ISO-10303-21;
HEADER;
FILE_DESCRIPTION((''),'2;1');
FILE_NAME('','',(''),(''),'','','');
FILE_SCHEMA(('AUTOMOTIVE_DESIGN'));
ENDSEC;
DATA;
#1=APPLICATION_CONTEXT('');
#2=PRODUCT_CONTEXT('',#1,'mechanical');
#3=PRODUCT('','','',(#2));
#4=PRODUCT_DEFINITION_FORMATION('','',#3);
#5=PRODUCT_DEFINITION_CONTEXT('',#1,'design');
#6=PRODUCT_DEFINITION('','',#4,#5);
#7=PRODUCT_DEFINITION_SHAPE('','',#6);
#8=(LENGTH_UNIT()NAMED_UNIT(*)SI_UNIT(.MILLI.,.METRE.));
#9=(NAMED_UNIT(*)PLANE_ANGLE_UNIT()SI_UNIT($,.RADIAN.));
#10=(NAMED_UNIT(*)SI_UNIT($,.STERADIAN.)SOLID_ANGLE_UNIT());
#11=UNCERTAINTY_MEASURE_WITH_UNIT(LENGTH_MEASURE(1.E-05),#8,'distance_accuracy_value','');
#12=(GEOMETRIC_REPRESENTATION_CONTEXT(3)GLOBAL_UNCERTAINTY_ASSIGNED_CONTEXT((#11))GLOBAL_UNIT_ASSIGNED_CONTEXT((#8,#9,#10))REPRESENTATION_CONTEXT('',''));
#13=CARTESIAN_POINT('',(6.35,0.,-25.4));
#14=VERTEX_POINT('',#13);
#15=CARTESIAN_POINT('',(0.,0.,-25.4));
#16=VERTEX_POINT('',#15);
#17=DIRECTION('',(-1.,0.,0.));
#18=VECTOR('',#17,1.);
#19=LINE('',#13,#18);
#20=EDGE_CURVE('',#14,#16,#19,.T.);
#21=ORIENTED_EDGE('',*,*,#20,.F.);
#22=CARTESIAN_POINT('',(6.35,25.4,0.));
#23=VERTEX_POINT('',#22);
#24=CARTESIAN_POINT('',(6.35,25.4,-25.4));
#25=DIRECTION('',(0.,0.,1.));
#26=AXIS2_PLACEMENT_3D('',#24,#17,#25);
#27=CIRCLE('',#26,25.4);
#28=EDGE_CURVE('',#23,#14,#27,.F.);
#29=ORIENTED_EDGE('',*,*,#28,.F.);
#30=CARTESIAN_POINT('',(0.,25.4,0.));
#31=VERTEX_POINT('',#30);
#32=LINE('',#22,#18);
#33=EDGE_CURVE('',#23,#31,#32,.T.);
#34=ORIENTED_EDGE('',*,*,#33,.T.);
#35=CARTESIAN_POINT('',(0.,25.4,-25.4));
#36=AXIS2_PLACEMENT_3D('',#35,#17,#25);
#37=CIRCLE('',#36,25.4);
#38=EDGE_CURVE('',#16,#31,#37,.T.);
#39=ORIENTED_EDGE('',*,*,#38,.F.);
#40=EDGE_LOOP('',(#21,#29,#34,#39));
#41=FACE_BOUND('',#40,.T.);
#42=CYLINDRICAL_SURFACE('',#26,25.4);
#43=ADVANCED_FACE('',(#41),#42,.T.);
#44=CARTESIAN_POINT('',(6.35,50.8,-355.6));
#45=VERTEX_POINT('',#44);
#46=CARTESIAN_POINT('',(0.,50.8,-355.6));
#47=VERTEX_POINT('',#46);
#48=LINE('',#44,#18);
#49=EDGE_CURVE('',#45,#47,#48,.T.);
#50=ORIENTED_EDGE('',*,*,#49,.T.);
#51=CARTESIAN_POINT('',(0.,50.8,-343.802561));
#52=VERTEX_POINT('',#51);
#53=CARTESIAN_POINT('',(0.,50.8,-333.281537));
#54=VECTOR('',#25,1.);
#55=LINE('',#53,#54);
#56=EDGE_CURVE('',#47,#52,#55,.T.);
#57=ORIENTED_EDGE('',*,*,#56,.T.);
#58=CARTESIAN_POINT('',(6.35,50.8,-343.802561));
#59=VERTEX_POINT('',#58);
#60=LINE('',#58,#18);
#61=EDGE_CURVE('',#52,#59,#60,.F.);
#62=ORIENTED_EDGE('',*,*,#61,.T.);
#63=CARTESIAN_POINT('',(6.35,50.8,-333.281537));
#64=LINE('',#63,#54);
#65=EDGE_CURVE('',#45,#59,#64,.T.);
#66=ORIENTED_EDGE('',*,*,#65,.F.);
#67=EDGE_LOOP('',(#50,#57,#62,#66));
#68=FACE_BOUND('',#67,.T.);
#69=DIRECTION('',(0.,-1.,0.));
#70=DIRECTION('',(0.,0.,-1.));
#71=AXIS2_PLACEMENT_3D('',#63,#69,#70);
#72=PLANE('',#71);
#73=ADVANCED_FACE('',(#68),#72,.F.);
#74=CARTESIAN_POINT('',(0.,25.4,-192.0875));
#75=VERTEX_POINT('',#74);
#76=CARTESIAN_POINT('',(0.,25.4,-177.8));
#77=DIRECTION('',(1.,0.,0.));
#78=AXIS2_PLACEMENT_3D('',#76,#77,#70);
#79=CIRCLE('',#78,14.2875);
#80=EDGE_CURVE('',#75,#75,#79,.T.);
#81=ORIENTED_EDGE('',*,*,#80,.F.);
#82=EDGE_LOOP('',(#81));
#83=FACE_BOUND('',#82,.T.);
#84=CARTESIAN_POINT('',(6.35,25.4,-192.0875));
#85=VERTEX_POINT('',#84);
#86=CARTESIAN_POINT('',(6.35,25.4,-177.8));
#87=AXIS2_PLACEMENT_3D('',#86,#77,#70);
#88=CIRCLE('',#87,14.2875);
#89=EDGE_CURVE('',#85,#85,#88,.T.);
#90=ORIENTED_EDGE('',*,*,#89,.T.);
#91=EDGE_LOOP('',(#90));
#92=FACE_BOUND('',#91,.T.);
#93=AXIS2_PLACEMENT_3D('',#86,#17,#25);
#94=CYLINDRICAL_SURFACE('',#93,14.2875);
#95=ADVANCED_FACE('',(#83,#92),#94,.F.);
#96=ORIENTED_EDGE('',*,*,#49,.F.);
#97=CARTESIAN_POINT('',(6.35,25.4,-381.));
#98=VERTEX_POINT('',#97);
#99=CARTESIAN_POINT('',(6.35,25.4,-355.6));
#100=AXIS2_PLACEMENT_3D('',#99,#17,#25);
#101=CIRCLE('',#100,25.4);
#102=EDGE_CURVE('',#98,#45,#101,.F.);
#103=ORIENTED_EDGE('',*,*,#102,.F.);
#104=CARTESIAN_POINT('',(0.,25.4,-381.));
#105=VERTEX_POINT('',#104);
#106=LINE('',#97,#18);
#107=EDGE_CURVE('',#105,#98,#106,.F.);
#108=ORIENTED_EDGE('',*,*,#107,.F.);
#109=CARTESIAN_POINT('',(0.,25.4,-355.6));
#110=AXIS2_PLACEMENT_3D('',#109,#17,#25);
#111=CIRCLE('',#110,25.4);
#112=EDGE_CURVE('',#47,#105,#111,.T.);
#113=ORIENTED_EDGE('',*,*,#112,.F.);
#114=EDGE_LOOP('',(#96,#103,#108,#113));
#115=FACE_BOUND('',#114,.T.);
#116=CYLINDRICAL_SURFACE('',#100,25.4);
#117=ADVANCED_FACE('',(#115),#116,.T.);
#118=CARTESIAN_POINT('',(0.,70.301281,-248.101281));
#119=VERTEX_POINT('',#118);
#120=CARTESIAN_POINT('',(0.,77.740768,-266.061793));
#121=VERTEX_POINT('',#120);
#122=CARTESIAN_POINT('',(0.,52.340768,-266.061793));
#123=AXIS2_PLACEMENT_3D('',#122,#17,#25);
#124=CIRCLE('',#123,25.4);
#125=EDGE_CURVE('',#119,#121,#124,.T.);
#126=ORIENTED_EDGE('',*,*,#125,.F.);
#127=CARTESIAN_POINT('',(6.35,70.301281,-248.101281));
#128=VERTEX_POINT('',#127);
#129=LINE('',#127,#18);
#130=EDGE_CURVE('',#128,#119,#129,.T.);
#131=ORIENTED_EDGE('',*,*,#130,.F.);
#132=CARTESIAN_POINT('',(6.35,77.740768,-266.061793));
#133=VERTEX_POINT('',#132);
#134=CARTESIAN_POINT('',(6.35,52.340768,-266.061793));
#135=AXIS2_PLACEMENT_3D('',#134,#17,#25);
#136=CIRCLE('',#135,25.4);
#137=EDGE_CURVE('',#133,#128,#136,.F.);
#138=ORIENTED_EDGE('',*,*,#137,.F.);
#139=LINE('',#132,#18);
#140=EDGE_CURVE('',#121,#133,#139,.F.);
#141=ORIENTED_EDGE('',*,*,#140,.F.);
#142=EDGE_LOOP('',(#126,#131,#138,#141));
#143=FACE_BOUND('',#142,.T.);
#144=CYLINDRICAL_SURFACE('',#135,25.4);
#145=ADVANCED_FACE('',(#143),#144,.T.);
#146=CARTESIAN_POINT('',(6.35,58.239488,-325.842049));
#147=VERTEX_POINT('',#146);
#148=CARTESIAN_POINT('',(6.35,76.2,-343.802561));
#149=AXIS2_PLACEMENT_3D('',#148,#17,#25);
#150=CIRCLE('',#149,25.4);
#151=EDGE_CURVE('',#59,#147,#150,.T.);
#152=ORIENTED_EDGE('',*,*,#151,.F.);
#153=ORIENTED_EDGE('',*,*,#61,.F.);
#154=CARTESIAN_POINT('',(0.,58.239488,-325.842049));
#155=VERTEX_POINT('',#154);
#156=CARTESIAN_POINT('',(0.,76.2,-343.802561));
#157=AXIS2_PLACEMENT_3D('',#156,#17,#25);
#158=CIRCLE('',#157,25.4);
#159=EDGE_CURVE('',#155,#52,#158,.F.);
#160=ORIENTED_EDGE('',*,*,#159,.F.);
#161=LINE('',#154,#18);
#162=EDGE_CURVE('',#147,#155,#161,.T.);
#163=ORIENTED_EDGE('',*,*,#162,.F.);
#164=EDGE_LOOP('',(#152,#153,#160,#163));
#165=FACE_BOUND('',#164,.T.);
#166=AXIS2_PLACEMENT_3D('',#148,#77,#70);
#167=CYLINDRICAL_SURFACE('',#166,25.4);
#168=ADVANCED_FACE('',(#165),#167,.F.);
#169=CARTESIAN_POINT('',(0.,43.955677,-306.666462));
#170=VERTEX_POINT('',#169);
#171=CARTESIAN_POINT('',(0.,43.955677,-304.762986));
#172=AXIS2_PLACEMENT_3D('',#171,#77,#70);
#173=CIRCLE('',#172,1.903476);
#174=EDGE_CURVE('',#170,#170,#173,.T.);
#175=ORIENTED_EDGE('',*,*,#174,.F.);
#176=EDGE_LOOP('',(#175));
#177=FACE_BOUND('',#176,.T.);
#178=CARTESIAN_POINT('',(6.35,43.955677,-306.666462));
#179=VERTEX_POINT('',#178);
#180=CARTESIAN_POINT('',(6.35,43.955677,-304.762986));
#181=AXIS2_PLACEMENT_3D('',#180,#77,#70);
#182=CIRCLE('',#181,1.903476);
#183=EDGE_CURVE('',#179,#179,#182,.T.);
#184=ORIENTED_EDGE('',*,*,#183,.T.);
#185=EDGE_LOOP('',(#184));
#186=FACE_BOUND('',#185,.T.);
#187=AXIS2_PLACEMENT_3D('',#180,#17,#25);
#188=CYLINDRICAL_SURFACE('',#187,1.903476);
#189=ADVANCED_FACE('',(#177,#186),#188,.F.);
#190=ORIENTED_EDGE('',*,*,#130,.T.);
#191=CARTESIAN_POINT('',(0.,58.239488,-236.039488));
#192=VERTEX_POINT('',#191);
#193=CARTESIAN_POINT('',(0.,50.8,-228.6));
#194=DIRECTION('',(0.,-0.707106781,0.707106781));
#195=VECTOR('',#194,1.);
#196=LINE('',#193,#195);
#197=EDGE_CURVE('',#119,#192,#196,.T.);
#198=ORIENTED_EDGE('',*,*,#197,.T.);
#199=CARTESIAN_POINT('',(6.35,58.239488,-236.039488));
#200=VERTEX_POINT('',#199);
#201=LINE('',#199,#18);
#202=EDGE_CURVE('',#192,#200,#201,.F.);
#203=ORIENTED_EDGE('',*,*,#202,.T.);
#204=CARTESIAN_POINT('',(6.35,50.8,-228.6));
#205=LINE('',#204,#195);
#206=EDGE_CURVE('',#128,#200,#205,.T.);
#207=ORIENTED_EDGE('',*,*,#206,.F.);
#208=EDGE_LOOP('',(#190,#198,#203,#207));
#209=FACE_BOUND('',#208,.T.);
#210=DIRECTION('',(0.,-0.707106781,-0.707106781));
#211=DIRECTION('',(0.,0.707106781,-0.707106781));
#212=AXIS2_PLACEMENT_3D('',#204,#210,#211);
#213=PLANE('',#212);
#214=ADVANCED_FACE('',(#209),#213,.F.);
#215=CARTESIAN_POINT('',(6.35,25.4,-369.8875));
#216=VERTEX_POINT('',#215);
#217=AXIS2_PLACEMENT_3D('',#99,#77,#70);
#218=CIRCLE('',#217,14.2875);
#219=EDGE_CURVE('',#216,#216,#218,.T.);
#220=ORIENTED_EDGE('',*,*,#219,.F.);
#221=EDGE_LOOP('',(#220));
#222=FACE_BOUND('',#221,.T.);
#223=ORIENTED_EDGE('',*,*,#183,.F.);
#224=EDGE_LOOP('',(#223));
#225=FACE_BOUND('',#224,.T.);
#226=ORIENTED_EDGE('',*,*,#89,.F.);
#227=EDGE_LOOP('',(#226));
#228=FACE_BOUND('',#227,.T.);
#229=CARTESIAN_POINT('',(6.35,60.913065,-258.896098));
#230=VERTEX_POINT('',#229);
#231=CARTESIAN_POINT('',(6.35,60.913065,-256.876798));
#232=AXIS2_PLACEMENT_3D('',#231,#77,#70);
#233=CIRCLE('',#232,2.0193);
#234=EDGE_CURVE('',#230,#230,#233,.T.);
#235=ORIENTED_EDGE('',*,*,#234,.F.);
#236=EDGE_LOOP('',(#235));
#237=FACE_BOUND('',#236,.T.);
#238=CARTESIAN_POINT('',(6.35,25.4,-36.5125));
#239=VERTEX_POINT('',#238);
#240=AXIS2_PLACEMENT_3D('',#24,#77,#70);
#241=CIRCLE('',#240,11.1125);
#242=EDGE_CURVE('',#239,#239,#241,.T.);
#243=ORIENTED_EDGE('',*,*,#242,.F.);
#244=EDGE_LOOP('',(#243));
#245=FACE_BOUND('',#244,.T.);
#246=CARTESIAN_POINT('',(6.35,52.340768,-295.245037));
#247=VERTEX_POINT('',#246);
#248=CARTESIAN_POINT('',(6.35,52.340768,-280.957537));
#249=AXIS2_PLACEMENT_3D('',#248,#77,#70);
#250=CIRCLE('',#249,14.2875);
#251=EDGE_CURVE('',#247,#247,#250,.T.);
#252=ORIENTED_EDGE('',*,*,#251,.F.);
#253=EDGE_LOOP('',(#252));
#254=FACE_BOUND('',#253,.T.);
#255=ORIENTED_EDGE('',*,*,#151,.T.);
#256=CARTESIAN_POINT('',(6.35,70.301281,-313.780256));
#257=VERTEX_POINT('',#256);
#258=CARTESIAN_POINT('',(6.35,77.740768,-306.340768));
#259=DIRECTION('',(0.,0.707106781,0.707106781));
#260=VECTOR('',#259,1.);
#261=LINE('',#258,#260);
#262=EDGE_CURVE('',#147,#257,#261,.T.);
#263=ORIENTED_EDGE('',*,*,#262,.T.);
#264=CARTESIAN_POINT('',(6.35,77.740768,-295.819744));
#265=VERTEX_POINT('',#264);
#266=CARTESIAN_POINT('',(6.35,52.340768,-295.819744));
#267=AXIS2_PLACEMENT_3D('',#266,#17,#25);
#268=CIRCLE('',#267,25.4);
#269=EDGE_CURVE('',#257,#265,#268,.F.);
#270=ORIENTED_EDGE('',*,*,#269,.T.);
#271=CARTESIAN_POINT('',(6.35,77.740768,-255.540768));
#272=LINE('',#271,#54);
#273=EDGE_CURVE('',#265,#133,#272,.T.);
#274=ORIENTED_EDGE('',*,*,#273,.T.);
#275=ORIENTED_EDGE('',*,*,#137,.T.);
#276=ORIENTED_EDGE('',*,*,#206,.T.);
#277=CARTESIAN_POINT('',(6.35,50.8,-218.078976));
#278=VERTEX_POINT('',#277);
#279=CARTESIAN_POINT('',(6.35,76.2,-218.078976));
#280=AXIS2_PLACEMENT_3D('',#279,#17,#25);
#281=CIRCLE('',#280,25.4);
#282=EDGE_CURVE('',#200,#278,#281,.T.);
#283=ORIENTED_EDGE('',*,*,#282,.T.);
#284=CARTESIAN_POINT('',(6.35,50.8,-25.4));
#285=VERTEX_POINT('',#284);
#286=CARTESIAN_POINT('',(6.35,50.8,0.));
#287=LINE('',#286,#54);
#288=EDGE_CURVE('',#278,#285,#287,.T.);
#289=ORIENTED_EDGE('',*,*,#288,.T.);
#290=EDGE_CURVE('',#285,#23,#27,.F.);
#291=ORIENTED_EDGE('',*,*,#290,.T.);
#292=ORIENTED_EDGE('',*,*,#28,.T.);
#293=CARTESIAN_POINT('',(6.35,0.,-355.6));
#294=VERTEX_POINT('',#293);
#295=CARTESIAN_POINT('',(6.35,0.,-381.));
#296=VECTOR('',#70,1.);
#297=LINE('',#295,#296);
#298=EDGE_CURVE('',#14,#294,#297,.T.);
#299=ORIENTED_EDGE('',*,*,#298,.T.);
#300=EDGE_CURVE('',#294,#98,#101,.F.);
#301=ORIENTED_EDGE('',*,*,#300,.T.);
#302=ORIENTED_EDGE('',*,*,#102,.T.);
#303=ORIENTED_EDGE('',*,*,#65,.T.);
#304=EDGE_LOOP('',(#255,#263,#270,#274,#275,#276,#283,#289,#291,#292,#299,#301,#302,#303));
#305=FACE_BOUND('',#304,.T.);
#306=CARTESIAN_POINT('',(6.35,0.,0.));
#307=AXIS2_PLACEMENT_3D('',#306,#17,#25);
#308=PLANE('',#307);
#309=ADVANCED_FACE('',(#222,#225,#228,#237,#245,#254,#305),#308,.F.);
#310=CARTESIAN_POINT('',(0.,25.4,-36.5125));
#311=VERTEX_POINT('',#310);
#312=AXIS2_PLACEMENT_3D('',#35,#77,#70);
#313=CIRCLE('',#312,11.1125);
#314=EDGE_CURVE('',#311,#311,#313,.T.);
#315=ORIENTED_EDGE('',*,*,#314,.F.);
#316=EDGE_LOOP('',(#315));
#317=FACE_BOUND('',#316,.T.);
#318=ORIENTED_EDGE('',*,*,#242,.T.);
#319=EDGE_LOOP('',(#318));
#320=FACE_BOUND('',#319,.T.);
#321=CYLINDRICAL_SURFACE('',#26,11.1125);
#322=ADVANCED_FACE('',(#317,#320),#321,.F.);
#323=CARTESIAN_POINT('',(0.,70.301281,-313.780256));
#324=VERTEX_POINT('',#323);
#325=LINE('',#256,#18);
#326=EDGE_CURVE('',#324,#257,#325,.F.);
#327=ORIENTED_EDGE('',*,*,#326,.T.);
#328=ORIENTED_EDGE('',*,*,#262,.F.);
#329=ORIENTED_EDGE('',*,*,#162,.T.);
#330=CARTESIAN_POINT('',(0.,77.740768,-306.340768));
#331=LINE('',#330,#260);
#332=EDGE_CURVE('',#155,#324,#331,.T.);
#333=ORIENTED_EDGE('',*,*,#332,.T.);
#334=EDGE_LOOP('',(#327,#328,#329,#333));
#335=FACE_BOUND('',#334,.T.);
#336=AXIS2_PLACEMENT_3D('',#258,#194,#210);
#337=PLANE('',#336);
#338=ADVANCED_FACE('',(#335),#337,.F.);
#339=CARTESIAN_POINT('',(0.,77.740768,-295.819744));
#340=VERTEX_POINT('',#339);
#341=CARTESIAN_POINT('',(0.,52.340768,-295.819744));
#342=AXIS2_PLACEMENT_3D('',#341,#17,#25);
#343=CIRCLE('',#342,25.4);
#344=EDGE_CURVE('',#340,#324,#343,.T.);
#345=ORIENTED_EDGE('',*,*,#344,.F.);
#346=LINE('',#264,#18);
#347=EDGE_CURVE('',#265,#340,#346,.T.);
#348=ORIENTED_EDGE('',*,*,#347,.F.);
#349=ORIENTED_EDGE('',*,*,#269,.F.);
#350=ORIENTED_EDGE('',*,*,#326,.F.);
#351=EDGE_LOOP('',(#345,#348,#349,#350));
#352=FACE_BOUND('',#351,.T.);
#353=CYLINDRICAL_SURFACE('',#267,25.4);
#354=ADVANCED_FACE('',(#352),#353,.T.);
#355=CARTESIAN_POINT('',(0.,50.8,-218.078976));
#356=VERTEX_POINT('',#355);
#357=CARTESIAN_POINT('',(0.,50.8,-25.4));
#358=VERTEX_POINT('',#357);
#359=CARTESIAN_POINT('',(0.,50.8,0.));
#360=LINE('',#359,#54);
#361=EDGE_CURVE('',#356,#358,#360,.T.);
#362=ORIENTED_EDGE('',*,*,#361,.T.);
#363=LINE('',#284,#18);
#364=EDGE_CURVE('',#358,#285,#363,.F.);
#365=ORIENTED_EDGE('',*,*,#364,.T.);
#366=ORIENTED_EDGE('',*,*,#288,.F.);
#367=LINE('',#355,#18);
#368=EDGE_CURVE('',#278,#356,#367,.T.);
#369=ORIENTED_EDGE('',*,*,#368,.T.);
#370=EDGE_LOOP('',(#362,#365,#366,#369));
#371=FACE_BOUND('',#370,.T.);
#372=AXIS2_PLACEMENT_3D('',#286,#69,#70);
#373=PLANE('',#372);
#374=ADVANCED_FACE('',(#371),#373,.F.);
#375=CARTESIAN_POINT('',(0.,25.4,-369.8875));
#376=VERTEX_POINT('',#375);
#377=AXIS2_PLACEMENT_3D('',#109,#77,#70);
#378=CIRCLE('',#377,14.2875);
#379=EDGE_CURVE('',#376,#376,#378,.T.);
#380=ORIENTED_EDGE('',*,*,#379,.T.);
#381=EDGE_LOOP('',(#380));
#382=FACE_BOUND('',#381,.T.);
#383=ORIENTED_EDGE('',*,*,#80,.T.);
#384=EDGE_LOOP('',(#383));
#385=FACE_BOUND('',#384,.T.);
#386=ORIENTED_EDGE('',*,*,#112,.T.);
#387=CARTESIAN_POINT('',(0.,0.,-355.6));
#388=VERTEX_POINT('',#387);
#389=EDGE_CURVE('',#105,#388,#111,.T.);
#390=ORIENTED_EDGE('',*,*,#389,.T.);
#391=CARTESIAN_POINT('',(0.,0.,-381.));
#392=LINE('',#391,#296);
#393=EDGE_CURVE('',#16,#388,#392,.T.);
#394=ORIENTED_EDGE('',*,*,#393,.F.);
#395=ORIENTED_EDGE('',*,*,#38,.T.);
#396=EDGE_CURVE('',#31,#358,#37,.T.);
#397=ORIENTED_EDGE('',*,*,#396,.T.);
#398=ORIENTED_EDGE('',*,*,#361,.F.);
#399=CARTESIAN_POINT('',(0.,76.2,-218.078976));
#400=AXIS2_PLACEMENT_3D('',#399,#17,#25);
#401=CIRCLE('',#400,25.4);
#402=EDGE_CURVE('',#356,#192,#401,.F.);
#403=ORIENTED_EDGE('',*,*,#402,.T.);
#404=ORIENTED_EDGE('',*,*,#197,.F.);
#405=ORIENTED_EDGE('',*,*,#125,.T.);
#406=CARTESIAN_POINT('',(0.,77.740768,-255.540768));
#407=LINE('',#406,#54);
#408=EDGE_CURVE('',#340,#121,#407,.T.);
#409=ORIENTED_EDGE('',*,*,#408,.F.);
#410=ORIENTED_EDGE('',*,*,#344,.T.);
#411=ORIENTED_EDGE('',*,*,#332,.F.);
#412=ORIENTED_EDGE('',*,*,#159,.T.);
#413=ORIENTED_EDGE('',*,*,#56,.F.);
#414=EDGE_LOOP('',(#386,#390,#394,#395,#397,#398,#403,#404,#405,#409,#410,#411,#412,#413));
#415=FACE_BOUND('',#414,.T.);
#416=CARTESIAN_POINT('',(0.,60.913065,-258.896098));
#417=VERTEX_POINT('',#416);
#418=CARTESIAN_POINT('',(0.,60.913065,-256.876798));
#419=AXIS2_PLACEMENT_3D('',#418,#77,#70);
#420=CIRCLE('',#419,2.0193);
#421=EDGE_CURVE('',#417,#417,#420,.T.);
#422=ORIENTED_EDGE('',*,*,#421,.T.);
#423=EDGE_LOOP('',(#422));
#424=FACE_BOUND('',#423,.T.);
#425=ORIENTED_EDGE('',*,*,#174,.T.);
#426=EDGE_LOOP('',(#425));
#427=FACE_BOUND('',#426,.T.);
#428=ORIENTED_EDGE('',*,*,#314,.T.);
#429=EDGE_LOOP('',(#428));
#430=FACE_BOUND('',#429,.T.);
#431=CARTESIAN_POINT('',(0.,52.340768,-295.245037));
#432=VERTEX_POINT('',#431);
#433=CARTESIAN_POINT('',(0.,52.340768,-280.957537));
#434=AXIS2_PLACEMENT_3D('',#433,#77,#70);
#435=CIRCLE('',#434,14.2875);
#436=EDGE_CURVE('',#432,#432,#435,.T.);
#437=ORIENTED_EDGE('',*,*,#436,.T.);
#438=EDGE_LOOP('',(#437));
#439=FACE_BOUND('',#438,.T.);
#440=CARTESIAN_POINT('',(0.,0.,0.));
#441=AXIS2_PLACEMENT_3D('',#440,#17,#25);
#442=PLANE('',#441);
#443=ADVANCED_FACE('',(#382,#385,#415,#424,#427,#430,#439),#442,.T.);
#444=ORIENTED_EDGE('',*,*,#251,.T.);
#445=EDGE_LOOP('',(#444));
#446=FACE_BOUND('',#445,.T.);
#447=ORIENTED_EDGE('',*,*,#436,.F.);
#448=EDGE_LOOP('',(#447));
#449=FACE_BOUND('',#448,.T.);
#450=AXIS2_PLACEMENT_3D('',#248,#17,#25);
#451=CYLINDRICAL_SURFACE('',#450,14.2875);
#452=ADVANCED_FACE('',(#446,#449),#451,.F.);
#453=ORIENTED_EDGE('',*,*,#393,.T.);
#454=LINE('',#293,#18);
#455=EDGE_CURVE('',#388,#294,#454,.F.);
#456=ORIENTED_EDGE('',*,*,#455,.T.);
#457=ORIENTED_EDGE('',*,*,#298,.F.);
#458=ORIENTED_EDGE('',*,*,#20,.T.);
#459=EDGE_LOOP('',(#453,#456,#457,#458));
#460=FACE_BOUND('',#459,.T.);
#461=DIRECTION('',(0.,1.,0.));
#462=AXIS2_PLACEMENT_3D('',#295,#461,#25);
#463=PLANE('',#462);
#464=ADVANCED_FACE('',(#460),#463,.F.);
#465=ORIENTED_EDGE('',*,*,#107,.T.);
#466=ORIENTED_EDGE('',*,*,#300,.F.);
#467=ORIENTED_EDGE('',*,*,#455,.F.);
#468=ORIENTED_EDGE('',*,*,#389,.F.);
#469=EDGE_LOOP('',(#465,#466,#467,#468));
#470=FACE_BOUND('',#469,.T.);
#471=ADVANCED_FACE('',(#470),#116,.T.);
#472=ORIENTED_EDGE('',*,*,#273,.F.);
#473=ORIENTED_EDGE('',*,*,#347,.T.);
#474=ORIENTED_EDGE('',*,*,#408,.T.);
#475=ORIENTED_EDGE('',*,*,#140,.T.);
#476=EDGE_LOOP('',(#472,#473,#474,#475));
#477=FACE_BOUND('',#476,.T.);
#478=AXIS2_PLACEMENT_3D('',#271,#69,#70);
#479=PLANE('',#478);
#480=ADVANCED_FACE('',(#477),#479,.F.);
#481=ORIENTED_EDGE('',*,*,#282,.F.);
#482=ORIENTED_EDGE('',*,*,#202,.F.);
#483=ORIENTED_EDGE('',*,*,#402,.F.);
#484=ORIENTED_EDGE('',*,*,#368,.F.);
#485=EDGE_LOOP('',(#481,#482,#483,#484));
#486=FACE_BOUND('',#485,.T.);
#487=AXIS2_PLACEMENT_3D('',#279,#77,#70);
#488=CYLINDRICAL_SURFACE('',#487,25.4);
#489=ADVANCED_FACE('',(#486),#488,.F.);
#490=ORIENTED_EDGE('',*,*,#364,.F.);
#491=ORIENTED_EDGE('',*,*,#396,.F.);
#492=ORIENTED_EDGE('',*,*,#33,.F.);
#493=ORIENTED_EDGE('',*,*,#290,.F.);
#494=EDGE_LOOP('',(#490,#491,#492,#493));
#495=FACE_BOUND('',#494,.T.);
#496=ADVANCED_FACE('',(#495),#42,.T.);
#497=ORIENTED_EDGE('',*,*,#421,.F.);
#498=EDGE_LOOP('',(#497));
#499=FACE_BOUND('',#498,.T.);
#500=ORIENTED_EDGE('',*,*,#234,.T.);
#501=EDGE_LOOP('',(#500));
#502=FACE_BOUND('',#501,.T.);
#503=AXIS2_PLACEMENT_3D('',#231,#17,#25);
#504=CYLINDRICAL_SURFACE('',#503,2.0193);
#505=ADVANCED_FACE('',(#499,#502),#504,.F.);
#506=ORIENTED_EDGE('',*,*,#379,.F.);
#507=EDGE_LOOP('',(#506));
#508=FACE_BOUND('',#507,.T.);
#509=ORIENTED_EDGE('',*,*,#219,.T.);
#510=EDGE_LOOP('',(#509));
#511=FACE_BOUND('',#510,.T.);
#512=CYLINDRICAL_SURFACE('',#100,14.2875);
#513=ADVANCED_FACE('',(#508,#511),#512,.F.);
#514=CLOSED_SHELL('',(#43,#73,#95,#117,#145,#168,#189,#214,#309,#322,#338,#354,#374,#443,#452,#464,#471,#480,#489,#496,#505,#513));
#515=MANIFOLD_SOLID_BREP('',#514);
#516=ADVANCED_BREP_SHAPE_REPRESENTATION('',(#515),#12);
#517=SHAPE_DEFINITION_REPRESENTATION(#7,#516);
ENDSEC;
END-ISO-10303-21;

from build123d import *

# Parameters (mm, degrees)
SKETCH1_R           = 11.1125
SKETCH1_R_2         = 14.2875
SKETCH1_R_3         = 1.903475963
SKETCH1_R_4         = 2.0193
BOSS_EXTRUDE1_DEPTH = 6.35
FILLET1_R           = 25.4


with BuildPart() as part:
    # Sketch1 → Boss-Extrude1 (new body)
    with BuildSketch(Plane(origin=(0, 0, 0), x_dir=(0, 0, -1), z_dir=(1, 0, 0))):
        Polygon((0, 0), (0, 50.8), (228.6, 50.8), (255.540768363, 77.740768363), (306.340768363, 77.740768363), (333.281536726, 50.8), (381, 50.8), (381, 0), align=None)
        with Locations((25.4, 25.4)):
            Circle(SKETCH1_R, mode=Mode.SUBTRACT)
        with Locations((280.957536726, 52.340768363)):
            Circle(SKETCH1_R_2, mode=Mode.SUBTRACT)
        with Locations((355.6, 25.4)):
            Circle(SKETCH1_R_2, mode=Mode.SUBTRACT)
        with Locations((177.8, 25.4)):
            Circle(SKETCH1_R_2, mode=Mode.SUBTRACT)
        with Locations((304.762985996, 43.955677033)):
            Circle(SKETCH1_R_3, mode=Mode.SUBTRACT)
        with Locations((256.876798248, 60.913065482)):
            Circle(SKETCH1_R_4, mode=Mode.SUBTRACT)
    extrude(amount=BOSS_EXTRUDE1_DEPTH)

    # Fillet1
    fillet1_edges = [part.edges().sort_by_distance(p)[0] for p in [
        (3.175, 50.8, -228.6),
        (3.175, 50.8, -333.281536726),
        (3.175, 77.740768363, -306.340768363),
        (3.175, 77.740768363, -255.540768363),
        (3.175, 0, -381),
        (3.175, 50.8, -381),
        (3.175, 0, 0),
        (3.175, 50.8, 0),
    ]]
    fillet(fillet1_edges, radius=FILLET1_R - 0.0001)  # a hair under: the kernel refuses the full size


solid = part.part
